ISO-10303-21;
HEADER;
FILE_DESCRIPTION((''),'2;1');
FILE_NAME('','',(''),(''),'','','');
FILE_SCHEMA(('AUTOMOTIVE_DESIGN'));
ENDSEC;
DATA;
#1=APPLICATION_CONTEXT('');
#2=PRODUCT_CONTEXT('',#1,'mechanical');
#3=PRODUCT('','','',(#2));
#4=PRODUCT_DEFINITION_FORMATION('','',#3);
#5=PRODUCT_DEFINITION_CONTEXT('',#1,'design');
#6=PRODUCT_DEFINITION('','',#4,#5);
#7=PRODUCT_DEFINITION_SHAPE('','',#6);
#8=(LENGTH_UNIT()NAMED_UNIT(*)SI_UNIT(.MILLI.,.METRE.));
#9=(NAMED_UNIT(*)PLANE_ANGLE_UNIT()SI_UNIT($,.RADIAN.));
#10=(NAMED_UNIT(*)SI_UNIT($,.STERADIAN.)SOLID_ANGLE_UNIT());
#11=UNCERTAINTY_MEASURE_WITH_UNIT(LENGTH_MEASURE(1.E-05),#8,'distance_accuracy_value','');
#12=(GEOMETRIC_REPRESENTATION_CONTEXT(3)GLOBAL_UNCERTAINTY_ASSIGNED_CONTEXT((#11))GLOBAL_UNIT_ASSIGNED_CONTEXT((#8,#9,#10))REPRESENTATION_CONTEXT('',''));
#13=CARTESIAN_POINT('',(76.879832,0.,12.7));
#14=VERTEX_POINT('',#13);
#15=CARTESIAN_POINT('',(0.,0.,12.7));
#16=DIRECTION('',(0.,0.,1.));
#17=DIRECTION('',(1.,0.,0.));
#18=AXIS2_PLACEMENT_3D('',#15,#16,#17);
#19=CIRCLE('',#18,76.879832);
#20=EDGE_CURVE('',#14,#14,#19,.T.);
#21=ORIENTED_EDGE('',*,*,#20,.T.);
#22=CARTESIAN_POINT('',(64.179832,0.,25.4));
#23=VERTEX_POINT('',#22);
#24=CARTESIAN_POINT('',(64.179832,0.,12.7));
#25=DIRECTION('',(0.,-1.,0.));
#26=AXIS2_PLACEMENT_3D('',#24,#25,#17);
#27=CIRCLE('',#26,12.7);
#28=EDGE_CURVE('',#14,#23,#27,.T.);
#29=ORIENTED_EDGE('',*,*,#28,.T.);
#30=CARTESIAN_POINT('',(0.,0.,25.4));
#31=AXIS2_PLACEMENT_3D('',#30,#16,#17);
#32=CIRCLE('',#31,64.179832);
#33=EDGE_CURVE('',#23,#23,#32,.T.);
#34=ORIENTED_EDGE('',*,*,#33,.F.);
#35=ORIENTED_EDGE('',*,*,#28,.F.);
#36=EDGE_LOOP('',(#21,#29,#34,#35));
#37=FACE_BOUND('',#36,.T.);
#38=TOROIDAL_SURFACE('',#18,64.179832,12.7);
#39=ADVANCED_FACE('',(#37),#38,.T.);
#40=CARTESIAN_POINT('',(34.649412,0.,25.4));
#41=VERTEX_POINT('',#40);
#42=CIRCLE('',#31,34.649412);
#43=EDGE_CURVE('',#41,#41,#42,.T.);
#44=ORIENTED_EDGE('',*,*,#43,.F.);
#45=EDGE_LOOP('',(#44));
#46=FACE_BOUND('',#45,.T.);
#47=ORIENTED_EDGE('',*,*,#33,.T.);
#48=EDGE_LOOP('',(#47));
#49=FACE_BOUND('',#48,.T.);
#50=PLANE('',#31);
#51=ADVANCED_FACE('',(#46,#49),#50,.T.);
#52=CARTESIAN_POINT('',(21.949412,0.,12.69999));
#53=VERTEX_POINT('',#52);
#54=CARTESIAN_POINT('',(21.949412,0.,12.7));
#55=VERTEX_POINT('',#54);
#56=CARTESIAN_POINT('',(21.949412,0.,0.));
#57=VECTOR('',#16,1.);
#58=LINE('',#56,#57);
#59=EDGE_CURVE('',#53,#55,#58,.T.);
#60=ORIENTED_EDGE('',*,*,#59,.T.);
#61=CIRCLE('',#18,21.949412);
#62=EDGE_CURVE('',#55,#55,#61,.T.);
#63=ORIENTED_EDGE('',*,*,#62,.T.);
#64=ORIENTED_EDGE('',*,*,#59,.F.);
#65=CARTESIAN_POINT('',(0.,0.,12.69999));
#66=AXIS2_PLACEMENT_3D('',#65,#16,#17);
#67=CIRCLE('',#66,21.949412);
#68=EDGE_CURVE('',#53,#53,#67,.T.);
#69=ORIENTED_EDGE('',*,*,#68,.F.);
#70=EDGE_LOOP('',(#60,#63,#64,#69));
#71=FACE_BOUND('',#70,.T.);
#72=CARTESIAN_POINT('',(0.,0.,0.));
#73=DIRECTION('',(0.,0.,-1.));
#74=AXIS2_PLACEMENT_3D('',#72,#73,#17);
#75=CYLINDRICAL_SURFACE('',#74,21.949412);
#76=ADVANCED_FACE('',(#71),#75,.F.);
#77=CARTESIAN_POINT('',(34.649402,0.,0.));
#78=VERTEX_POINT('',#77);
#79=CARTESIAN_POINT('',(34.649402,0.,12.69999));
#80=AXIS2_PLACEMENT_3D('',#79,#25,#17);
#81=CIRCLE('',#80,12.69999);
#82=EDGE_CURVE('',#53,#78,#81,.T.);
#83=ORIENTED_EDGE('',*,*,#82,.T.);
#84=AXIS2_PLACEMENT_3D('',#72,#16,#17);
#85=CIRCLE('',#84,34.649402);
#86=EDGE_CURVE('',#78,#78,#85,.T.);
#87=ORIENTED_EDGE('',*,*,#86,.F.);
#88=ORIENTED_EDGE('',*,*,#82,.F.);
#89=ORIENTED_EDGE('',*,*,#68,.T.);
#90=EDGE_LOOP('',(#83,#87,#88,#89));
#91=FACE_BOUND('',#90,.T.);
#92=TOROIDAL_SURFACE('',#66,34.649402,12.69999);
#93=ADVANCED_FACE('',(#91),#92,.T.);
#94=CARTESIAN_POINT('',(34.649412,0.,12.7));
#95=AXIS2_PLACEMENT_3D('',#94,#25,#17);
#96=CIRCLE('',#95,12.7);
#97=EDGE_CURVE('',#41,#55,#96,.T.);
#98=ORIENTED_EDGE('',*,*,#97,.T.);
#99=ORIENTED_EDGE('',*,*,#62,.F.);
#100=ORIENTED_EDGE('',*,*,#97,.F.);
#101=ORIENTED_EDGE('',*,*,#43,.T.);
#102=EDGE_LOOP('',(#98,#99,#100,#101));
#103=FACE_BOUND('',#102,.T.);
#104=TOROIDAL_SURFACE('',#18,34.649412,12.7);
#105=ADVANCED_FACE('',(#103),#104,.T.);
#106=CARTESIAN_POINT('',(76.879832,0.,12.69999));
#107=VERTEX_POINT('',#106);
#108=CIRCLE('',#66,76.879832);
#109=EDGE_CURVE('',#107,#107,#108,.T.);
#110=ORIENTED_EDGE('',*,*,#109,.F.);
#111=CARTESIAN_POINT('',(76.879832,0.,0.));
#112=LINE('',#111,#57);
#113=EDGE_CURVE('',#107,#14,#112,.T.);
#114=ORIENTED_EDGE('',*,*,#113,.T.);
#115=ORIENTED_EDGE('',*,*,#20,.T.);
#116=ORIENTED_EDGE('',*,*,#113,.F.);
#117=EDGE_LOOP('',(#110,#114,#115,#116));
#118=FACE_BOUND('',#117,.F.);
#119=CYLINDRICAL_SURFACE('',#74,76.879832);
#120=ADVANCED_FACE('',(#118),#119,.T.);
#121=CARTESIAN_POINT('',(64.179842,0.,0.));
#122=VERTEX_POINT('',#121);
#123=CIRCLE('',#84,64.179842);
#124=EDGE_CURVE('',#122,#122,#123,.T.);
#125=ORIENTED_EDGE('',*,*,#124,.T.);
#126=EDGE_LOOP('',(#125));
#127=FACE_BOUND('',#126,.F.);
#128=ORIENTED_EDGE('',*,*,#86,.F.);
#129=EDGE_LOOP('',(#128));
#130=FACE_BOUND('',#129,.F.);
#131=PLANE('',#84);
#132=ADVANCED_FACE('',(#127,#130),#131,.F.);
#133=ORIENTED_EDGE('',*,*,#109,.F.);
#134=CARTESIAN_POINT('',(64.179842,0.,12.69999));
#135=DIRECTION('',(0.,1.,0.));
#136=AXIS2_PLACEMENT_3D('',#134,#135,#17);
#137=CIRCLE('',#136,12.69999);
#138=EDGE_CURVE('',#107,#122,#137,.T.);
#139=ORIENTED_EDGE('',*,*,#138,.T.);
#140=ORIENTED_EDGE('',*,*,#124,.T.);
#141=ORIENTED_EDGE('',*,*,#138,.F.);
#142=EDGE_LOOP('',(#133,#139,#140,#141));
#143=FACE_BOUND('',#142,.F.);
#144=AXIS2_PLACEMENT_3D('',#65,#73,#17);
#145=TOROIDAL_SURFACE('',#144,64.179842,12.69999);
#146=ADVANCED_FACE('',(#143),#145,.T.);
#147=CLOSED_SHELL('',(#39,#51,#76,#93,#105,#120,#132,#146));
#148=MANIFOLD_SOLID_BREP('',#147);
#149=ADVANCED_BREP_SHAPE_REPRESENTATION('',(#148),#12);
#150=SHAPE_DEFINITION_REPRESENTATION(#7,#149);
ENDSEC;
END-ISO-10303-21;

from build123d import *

# Parameters (mm, degrees)
F0_R     = 76.8798317076
F0_R_2   = 21.949412209
F1_DEPTH = 25.4
F2_R     = 12.7
F3_R     = 12.69999
F4_R     = 12.7
F5_R     = 12.69999


# Not quite as in the source:
# - a fillet or chamfer is up to 0.001 mm smaller than in the source, because OpenCascade refuses the exact size


with BuildPart() as f1:
    # F0 (on Top) → F1 (new body)
    with BuildSketch(Plane.XY):
        Circle(F0_R)
        Circle(F0_R_2, mode=Mode.SUBTRACT)
    extrude(amount=F1_DEPTH)

    # F2
    f2_edges = [f1.edges().sort_by_distance(p)[0] for p in [
        (-76.879832, 0, 25.4),
    ]]
    fillet(f2_edges, radius=F2_R)

    # F3 (radius 12.7 in the source; OpenCascade refuses exactly that, so slightly less here)
    f3_edges = [f1.edges().sort_by_distance(p)[0] for p in [
        (-76.879832, 0, 0),
    ]]
    fillet(f3_edges, radius=F3_R)

    # F4
    f4_edges = [f1.edges().sort_by_distance(p)[0] for p in [
        (-21.949412, 0, 25.4),
    ]]
    fillet(f4_edges, radius=F4_R)

    # F5 (radius 12.7 in the source; OpenCascade refuses exactly that, so slightly less here)
    f5_edges = [f1.edges().sort_by_distance(p)[0] for p in [
        (-21.949412, 0, 0),
    ]]
    fillet(f5_edges, radius=F5_R)


solid = f1.part
